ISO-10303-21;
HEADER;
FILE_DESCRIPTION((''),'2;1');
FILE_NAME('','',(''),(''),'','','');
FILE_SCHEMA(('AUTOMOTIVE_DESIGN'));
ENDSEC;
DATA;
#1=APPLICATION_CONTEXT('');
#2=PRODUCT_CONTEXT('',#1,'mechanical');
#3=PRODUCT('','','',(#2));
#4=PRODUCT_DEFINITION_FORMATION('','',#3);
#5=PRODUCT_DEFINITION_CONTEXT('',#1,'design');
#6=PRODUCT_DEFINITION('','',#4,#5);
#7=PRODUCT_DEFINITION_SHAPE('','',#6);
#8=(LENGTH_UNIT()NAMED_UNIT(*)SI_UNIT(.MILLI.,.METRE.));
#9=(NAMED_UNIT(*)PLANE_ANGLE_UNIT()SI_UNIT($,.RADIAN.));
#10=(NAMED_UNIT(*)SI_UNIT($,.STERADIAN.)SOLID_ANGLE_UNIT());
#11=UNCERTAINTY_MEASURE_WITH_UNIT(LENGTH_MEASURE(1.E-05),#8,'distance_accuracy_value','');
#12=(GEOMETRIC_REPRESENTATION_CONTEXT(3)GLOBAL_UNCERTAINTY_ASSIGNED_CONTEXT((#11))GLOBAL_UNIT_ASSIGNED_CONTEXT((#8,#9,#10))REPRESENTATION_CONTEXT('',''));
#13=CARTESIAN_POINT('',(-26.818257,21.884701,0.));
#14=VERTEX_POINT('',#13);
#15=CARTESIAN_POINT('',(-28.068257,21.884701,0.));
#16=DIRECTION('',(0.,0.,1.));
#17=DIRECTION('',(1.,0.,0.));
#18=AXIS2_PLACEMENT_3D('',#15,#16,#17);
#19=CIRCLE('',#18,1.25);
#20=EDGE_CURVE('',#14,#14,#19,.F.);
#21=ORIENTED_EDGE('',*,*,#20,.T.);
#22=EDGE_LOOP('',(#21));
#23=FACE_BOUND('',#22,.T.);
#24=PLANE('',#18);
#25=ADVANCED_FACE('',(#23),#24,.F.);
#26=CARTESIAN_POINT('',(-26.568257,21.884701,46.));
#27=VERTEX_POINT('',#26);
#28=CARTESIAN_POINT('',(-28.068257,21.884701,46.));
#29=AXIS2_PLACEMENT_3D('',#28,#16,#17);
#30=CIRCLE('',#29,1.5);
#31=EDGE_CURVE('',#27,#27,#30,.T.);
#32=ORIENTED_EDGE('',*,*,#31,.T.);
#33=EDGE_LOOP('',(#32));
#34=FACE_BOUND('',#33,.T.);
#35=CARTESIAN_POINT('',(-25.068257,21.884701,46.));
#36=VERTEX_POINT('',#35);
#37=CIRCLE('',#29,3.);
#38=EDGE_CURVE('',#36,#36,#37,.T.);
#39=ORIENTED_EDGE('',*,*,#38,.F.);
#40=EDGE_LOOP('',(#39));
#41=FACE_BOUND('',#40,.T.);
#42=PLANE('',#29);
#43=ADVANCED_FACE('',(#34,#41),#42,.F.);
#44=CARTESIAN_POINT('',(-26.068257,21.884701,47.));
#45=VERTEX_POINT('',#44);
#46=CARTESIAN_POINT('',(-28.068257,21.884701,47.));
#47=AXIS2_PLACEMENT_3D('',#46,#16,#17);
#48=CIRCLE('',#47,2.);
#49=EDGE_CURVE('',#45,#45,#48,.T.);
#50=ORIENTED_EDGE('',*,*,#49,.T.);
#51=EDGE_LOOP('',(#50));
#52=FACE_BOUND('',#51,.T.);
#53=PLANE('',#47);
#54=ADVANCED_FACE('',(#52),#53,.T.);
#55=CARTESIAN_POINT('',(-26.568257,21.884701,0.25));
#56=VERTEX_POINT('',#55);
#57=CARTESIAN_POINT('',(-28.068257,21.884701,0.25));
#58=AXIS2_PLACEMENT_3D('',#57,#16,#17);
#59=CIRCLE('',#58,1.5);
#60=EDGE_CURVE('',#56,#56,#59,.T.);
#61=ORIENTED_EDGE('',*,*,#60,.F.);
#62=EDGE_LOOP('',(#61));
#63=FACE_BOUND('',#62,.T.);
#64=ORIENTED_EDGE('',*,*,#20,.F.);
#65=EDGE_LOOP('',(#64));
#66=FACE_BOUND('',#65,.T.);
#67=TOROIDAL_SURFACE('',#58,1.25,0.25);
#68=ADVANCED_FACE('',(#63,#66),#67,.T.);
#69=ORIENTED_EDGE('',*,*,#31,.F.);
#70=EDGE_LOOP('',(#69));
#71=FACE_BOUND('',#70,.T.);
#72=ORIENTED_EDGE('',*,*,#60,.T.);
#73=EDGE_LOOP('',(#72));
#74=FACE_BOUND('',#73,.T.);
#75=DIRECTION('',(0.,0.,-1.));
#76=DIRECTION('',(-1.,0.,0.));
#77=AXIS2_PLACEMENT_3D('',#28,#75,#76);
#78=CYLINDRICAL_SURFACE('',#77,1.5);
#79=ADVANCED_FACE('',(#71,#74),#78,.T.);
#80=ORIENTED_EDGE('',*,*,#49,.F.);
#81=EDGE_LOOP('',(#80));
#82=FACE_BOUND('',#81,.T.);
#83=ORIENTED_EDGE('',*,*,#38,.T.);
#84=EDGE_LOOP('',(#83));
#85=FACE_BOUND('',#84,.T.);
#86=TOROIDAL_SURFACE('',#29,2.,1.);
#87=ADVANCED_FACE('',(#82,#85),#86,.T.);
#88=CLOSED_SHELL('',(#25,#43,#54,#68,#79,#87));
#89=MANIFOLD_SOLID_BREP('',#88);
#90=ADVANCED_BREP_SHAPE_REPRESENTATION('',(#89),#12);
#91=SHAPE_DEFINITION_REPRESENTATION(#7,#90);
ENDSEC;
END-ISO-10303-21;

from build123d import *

# Parameters (mm, degrees)
ESQUISSE1_R        = 1.5
BOSS_EXTRU_1_DEPTH = 46
ESQUISSE2_R        = 3
BOSS_EXTRU_2_DEPTH = 1
CONG_1_R           = 1
CONG_2_R           = 0.25


with BuildPart() as part:
    # Esquisse1 → Boss.-Extru.1 (new body)
    with BuildSketch(Plane.XY):
        with Locations((-28.068256791, 21.884700983)):
            Circle(ESQUISSE1_R)
    extrude(amount=BOSS_EXTRU_1_DEPTH)

    # Esquisse2 → Boss.-Extru.2 (add)
    with BuildSketch(Plane.XY.offset(46)):
        with Locations((-28.068256791, 21.884700983)):
            Circle(ESQUISSE2_R)
    extrude(amount=BOSS_EXTRU_2_DEPTH)

    # Congé1
    cong_1_edges = [part.edges().sort_by_distance(p)[0] for p in [
        (-31.068256791, 21.884700983, 47),
    ]]
    fillet(cong_1_edges, radius=CONG_1_R - 0.0001)  # a hair under: the kernel refuses the full size

    # Congé2
    cong_2_edges = [part.edges().sort_by_distance(p)[0] for p in [
        (-29.568256791, 21.884700983, 0),
    ]]
    fillet(cong_2_edges, radius=CONG_2_R)


solid = part.part
